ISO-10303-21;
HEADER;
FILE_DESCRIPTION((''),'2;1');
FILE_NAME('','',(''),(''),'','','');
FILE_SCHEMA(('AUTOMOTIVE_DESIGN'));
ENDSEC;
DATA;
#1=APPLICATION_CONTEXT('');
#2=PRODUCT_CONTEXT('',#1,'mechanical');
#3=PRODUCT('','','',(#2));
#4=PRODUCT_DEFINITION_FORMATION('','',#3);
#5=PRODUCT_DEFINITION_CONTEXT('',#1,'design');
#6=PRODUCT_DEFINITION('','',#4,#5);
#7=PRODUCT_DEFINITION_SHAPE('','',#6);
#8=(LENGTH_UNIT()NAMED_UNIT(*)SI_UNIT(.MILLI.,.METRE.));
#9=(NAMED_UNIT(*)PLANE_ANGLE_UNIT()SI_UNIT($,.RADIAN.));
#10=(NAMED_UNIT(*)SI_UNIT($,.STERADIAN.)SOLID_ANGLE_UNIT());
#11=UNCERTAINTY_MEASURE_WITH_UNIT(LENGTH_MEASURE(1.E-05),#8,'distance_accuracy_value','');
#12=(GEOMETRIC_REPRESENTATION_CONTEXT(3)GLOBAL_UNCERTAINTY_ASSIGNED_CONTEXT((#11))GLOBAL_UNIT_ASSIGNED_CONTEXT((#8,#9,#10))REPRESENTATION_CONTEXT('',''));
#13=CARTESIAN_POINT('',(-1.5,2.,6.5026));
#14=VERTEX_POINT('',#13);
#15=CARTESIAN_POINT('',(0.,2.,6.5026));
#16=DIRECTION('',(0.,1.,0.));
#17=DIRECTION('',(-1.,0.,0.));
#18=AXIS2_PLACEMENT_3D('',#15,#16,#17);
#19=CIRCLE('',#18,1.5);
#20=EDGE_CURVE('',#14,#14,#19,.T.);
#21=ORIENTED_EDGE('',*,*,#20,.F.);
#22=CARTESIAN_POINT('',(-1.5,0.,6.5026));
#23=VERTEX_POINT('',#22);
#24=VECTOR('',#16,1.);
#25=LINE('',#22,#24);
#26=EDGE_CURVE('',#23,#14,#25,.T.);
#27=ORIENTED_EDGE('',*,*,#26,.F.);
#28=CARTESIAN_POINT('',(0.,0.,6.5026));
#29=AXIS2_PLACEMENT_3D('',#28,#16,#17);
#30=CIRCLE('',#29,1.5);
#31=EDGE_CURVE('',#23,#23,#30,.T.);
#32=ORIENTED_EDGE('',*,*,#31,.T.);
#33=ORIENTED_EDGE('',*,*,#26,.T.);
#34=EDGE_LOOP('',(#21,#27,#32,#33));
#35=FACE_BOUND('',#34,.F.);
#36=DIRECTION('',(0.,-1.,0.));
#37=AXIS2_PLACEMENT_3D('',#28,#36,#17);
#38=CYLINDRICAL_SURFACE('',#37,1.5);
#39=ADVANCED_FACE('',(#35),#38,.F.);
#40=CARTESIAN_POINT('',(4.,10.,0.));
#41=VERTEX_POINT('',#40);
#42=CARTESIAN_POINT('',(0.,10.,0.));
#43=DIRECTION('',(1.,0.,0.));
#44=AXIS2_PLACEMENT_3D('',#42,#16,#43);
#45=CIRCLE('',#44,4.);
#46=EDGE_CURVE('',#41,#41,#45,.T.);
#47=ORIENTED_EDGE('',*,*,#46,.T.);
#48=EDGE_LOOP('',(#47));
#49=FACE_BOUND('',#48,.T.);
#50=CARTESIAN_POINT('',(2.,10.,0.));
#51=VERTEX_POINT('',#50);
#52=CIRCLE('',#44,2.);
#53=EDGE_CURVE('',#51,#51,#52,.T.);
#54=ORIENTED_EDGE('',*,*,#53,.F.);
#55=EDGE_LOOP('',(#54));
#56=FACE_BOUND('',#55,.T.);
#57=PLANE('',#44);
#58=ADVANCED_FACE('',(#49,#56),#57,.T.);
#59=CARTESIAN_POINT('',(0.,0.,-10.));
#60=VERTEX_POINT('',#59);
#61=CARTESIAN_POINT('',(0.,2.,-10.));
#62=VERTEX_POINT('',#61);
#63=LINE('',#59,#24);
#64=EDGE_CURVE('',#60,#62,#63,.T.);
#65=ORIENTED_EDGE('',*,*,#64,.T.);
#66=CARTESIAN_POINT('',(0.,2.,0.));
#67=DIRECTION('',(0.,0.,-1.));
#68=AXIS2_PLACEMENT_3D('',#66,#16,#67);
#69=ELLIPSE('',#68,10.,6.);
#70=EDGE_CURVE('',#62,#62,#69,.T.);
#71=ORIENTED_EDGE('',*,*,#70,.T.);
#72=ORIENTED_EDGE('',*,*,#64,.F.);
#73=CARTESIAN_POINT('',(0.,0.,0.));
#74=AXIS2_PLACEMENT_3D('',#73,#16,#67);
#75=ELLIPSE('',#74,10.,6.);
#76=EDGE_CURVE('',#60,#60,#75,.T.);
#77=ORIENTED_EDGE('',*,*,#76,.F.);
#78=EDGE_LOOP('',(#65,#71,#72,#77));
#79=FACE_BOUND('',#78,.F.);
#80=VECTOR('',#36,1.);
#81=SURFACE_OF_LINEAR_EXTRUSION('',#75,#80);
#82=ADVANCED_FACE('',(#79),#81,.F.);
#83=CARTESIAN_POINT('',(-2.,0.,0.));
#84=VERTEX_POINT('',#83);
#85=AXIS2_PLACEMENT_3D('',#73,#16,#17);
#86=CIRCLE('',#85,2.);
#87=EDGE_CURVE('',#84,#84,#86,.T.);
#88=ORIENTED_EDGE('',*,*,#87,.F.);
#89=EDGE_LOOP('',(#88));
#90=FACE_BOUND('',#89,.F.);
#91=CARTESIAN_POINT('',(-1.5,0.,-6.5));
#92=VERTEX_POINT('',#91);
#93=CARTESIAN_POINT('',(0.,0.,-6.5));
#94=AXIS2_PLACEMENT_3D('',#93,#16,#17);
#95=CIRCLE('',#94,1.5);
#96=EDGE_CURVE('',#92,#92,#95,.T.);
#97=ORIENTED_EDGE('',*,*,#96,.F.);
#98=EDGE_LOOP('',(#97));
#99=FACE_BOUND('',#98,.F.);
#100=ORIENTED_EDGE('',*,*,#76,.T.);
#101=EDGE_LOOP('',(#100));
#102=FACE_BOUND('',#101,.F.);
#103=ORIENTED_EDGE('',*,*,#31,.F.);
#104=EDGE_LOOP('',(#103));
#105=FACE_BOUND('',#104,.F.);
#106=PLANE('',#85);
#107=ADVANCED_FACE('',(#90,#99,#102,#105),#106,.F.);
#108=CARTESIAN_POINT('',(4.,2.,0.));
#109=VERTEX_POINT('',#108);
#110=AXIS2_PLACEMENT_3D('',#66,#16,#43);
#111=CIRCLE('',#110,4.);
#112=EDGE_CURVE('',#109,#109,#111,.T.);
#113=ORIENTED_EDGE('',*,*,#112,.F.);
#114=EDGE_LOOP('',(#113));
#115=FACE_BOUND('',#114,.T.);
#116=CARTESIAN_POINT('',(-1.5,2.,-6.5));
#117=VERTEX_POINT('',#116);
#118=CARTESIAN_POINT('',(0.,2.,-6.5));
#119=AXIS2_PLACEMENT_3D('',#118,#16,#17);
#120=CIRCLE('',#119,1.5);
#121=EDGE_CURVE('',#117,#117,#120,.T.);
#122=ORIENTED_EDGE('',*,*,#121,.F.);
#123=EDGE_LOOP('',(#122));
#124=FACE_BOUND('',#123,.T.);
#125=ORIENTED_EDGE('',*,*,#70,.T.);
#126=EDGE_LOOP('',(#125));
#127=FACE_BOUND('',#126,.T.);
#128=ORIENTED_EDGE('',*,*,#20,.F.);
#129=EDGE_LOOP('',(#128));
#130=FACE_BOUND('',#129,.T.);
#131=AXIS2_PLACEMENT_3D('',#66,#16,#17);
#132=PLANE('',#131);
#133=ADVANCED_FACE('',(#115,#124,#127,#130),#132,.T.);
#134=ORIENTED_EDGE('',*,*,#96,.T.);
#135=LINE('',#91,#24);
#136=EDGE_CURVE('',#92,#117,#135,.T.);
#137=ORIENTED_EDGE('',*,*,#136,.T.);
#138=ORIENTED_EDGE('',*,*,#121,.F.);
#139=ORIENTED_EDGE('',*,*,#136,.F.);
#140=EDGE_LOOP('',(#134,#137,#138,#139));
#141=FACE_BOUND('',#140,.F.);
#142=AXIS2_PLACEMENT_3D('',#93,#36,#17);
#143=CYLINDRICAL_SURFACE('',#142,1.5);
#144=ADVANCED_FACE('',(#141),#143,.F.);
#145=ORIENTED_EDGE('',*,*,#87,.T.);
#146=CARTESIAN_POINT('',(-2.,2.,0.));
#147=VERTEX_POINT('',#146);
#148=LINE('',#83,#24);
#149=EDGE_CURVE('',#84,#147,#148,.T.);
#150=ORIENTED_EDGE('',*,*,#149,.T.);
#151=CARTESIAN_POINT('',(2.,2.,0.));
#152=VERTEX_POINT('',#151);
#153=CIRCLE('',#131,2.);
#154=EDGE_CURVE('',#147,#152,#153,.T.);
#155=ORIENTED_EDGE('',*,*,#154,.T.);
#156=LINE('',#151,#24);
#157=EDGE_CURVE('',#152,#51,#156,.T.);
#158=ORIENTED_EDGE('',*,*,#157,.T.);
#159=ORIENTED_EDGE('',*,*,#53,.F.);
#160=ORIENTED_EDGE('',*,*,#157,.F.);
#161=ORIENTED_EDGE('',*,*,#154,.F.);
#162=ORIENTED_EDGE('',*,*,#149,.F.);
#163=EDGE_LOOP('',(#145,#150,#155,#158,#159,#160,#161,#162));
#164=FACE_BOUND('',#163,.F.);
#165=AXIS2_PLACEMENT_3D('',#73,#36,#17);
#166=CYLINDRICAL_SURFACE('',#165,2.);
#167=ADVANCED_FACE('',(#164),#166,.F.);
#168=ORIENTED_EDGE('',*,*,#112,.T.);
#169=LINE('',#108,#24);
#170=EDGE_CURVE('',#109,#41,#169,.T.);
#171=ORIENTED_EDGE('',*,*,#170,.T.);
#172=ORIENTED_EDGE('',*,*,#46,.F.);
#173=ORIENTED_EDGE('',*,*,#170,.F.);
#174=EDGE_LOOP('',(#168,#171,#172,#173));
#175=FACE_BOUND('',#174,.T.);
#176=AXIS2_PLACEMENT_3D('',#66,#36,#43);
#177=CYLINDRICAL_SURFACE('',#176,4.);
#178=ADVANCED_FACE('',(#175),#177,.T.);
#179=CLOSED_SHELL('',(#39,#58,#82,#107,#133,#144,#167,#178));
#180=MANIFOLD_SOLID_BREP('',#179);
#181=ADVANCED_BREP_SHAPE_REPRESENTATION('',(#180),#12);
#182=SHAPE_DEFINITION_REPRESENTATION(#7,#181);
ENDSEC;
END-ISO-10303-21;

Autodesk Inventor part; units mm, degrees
ref_plane "YZ Plane" through (0, 0, 0) normal (1, 0, 0) x (0, 1, 0)
ref_plane "XZ Plane" through (0, 0, 0) normal (0, 1, 0) x (-1, 0, 0)
ref_plane "XY Plane" through (0, 0, 0) normal (0, 0, 1) x (1, 0, 0)
sketch "Sketch3" plane through (0, 0, 0) normal (0, 1, 0) x (-1, 0, 0)
  ellipse E0 centre (0, 0) end of major axis (0, -10) minor radius 6
  circle A0 centre (0, 0) radius 2
  circle A1 centre (0, 6.5026) radius 1.5
  circle A2 centre (0, -6.5) radius 1.5
  dimension "d0" = 6
  dimension "d3" = 10
  dimension "d2" = 4
  dimension "d5" = 3
  dimension "d9" = 6.5026
  dimension "d11" = 3
  dimension "d12" = 6.5
extrude "Extrusion1" add sketch "Sketch3" along normal blind 2
sketch "Sketch4" plane through (0, 2, 0) normal (0, 1, 0) x (1, 0, 0)
  circle A0 centre (0, 0) radius 4
  circle A1 centre (0, 0) radius 2
  dimension "d15" = 8
  dimension "d16" = 4
extrude "Extrusion2" add sketch "Sketch4" along normal blind 8
properties part number "reverse gear blands"
